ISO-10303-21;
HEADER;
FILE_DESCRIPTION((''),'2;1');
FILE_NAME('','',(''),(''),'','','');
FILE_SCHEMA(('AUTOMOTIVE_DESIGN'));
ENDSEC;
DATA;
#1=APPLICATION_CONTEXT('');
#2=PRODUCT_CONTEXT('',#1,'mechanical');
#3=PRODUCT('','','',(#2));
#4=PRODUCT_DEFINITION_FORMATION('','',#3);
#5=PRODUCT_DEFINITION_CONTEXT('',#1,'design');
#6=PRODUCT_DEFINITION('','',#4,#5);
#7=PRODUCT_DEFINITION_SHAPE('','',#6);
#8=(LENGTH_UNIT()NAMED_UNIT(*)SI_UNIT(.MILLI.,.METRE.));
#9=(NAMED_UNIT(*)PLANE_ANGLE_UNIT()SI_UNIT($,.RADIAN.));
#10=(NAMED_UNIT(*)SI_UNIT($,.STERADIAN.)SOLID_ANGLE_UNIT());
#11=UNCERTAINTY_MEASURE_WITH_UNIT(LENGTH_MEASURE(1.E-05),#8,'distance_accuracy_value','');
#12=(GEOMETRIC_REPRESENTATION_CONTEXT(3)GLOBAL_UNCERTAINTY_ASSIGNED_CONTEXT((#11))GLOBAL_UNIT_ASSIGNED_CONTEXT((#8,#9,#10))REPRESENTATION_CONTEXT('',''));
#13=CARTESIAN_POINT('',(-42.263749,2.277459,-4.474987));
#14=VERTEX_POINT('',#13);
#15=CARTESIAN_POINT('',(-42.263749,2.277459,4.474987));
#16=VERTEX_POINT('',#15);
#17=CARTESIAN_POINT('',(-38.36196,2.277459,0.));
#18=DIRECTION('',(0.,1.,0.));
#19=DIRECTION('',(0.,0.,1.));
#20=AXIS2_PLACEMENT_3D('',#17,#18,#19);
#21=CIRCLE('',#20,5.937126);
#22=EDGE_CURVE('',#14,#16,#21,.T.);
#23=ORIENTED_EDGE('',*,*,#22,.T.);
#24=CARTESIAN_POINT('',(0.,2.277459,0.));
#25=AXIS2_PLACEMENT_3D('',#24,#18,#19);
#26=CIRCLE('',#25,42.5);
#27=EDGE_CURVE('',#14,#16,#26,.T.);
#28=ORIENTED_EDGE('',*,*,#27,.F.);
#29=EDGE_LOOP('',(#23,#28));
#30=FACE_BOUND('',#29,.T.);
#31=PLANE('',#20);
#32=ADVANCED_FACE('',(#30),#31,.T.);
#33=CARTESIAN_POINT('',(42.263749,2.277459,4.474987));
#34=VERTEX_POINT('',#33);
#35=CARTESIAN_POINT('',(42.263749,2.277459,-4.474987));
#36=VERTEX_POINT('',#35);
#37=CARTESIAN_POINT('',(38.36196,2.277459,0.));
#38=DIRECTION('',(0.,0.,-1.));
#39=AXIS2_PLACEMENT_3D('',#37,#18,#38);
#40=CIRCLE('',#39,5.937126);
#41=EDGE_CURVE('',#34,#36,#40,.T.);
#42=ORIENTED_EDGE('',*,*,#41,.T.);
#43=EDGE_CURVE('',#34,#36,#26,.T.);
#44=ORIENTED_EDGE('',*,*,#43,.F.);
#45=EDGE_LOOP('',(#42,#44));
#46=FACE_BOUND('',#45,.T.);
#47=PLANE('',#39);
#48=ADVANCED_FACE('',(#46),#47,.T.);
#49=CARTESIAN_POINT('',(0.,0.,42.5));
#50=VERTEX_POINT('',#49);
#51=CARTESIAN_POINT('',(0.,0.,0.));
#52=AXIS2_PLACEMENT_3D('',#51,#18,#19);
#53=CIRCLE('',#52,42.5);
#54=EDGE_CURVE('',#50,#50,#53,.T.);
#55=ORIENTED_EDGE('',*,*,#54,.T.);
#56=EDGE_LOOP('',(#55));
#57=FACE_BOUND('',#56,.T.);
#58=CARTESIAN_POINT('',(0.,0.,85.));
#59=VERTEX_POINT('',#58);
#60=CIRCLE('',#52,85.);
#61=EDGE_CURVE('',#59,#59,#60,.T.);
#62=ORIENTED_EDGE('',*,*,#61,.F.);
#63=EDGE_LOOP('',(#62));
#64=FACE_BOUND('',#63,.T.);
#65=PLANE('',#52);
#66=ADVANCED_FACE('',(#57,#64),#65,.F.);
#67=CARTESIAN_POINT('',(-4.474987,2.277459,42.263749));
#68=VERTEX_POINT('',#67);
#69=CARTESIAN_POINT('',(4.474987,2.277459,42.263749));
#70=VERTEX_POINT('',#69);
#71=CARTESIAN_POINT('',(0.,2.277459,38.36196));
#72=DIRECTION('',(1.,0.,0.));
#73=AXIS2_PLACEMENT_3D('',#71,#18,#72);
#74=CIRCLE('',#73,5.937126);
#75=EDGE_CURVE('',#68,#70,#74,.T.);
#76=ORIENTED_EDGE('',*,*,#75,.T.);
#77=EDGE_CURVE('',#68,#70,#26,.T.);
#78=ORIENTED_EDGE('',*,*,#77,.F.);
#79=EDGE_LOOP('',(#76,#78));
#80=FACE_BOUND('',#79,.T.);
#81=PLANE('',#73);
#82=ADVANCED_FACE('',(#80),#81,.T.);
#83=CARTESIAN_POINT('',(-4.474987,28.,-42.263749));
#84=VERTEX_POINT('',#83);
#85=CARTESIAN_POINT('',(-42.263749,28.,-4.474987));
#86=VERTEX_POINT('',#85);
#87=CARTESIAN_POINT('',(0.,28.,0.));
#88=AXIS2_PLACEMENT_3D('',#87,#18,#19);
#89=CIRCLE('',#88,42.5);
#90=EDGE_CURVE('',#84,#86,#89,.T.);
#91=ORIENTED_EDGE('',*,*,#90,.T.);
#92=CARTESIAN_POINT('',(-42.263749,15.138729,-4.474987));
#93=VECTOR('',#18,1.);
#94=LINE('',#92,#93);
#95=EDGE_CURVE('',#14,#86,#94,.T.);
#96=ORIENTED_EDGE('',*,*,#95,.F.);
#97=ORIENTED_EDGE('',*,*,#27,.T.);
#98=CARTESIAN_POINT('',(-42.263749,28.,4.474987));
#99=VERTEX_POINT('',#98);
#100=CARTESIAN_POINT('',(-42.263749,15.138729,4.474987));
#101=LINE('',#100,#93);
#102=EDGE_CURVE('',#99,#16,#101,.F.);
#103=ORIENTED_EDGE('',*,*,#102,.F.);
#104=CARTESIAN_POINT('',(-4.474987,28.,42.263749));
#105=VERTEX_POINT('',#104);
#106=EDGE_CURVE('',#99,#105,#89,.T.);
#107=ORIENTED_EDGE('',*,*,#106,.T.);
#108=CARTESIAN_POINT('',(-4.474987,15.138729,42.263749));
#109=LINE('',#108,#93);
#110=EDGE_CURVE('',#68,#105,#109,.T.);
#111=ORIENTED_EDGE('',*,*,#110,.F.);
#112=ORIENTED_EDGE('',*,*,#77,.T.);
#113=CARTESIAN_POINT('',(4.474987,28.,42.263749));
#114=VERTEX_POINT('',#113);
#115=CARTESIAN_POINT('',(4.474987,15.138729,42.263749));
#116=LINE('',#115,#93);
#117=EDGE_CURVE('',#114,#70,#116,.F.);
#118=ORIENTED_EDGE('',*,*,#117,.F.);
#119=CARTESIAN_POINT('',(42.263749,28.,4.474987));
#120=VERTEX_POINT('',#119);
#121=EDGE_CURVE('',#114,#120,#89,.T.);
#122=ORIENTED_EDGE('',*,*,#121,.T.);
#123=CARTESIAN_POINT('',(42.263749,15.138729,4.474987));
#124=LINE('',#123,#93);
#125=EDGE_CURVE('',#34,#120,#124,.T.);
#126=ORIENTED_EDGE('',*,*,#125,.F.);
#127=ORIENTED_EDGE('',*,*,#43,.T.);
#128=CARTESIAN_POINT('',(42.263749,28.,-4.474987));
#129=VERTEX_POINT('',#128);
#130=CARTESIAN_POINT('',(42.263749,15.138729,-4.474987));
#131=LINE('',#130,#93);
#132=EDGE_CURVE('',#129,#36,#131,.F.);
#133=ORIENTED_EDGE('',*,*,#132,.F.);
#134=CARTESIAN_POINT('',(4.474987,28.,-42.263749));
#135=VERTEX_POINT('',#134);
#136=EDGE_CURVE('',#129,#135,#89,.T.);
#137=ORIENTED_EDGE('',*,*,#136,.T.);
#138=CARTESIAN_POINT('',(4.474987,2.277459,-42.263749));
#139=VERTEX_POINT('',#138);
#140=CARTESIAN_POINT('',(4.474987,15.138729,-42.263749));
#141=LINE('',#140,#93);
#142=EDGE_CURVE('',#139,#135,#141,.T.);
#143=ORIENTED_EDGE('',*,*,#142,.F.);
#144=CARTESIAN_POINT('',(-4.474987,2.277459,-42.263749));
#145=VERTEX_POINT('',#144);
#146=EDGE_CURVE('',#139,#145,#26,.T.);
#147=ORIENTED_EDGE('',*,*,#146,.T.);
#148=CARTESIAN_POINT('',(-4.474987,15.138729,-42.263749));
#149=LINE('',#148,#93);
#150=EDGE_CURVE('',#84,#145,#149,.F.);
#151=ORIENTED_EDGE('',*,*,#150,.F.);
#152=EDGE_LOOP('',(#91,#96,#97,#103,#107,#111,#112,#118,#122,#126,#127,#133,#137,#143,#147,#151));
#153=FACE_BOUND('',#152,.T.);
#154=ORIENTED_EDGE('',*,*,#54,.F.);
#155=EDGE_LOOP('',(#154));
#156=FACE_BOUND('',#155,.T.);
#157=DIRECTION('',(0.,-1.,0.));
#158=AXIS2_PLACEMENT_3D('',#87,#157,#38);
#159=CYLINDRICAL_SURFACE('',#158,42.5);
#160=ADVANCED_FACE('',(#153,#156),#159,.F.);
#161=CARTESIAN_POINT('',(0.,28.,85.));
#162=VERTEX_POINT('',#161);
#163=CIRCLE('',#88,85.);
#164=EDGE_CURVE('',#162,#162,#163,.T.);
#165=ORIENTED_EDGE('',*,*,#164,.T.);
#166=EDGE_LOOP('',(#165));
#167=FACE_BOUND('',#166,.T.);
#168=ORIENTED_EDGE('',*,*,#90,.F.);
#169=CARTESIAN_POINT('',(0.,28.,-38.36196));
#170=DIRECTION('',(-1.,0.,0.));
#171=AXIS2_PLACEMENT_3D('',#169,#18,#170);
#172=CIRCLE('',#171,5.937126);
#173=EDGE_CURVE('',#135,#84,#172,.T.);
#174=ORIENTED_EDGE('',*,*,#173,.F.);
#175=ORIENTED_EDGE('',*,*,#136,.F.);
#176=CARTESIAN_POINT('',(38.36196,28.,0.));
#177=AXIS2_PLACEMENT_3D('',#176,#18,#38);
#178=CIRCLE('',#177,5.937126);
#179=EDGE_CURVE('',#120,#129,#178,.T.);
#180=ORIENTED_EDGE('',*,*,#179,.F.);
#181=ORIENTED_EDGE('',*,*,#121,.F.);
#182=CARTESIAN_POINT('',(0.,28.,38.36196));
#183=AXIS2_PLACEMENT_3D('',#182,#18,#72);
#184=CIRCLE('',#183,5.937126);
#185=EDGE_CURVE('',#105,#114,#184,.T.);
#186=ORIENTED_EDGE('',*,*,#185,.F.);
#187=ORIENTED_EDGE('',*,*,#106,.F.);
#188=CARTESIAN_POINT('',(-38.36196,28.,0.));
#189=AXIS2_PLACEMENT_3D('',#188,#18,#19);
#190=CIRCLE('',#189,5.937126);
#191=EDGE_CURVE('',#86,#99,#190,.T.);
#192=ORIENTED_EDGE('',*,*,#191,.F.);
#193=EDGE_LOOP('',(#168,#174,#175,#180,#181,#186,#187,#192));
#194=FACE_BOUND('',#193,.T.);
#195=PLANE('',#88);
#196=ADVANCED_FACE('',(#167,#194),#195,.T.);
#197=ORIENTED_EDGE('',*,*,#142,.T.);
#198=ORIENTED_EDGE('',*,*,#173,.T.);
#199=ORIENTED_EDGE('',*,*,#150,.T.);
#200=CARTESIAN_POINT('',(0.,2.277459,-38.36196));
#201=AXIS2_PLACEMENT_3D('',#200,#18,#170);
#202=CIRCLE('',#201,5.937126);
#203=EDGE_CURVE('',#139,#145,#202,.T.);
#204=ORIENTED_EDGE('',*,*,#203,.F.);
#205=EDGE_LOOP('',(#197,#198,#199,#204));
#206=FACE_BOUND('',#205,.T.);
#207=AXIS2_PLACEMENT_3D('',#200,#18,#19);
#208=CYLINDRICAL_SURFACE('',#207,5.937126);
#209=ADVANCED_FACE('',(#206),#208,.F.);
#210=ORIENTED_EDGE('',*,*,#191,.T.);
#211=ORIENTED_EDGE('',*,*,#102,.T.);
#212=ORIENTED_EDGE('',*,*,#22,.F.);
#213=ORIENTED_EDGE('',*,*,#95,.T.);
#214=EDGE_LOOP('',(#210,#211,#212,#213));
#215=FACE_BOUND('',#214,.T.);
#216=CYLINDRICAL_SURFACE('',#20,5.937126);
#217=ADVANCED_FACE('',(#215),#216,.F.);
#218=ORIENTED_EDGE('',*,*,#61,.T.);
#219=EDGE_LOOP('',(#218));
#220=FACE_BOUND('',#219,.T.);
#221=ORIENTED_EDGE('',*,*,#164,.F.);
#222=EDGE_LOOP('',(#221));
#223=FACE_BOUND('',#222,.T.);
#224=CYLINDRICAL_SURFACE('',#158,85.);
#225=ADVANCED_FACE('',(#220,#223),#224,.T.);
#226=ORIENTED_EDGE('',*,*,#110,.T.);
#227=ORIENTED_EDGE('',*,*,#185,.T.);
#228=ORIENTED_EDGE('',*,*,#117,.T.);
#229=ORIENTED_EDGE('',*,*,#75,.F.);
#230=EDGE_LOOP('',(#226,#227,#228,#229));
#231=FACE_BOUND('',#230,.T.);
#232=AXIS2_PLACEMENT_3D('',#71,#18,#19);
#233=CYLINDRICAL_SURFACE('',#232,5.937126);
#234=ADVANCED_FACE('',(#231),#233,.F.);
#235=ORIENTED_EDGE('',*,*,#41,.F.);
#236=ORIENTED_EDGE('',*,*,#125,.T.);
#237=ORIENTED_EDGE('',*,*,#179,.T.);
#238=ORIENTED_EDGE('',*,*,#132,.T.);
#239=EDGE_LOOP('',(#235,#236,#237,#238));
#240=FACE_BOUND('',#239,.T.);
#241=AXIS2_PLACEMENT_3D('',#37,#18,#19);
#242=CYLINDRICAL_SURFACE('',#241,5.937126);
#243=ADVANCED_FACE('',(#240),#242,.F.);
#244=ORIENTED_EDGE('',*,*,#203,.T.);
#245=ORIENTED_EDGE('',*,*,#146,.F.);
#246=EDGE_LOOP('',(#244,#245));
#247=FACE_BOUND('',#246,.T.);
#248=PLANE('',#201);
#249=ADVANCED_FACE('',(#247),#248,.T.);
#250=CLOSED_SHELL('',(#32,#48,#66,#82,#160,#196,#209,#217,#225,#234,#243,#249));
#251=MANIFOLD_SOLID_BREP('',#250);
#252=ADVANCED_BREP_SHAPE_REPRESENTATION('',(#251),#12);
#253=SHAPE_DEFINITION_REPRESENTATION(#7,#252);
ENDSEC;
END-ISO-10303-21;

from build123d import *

# Parameters (mm, degrees)
SKETCH1_R           = 85
BOSS_EXTRUDE1_DEPTH = 28
SKETCH2_R           = 42.5
CUT_EXTRUDE1_DEPTH  = 124.426091245
SKETCH3_R           = 5.93712615
CUT_EXTRUDE2_DEPTH  = 25.722541296
CIRPATTERN1_COUNT   = 4


with BuildPart() as part:
    # Sketch1 → Boss-Extrude1 (new body)
    with BuildSketch(Plane(origin=(0, 0, 0), x_dir=(1, 0, 0), z_dir=(0, 1, 0))):
        Circle(SKETCH1_R)
    extrude(amount=BOSS_EXTRUDE1_DEPTH)

    # Sketch2 → Cut-Extrude1 (cut, through all)
    with BuildSketch(Plane(origin=(0, 0, 0), x_dir=(1, 0, 0), z_dir=(0, 1, 0))):
        Circle(SKETCH2_R)
    extrude(amount=CUT_EXTRUDE1_DEPTH, mode=Mode.SUBTRACT)

    # Sketch3 → Cut-Extrude2 (cut)
    with BuildSketch(Plane(origin=(0, 28, 0), x_dir=(1, 0, 0), z_dir=(0, 1, 0))):
        with Locations((-38.361960231, 0)):
            Circle(SKETCH3_R)
    cut_extrude2 = extrude(amount=-CUT_EXTRUDE2_DEPTH, mode=Mode.SUBTRACT)

    # CirPattern1: Cut-Extrude2 ×4 about axis
    cirpattern1_axis = Axis((0, 0, 0), (0, 1, 0))
    for i in range(1, CIRPATTERN1_COUNT):
        add(cut_extrude2.rotate(cirpattern1_axis, i * 360 / CIRPATTERN1_COUNT), mode=Mode.SUBTRACT)


solid = part.part
